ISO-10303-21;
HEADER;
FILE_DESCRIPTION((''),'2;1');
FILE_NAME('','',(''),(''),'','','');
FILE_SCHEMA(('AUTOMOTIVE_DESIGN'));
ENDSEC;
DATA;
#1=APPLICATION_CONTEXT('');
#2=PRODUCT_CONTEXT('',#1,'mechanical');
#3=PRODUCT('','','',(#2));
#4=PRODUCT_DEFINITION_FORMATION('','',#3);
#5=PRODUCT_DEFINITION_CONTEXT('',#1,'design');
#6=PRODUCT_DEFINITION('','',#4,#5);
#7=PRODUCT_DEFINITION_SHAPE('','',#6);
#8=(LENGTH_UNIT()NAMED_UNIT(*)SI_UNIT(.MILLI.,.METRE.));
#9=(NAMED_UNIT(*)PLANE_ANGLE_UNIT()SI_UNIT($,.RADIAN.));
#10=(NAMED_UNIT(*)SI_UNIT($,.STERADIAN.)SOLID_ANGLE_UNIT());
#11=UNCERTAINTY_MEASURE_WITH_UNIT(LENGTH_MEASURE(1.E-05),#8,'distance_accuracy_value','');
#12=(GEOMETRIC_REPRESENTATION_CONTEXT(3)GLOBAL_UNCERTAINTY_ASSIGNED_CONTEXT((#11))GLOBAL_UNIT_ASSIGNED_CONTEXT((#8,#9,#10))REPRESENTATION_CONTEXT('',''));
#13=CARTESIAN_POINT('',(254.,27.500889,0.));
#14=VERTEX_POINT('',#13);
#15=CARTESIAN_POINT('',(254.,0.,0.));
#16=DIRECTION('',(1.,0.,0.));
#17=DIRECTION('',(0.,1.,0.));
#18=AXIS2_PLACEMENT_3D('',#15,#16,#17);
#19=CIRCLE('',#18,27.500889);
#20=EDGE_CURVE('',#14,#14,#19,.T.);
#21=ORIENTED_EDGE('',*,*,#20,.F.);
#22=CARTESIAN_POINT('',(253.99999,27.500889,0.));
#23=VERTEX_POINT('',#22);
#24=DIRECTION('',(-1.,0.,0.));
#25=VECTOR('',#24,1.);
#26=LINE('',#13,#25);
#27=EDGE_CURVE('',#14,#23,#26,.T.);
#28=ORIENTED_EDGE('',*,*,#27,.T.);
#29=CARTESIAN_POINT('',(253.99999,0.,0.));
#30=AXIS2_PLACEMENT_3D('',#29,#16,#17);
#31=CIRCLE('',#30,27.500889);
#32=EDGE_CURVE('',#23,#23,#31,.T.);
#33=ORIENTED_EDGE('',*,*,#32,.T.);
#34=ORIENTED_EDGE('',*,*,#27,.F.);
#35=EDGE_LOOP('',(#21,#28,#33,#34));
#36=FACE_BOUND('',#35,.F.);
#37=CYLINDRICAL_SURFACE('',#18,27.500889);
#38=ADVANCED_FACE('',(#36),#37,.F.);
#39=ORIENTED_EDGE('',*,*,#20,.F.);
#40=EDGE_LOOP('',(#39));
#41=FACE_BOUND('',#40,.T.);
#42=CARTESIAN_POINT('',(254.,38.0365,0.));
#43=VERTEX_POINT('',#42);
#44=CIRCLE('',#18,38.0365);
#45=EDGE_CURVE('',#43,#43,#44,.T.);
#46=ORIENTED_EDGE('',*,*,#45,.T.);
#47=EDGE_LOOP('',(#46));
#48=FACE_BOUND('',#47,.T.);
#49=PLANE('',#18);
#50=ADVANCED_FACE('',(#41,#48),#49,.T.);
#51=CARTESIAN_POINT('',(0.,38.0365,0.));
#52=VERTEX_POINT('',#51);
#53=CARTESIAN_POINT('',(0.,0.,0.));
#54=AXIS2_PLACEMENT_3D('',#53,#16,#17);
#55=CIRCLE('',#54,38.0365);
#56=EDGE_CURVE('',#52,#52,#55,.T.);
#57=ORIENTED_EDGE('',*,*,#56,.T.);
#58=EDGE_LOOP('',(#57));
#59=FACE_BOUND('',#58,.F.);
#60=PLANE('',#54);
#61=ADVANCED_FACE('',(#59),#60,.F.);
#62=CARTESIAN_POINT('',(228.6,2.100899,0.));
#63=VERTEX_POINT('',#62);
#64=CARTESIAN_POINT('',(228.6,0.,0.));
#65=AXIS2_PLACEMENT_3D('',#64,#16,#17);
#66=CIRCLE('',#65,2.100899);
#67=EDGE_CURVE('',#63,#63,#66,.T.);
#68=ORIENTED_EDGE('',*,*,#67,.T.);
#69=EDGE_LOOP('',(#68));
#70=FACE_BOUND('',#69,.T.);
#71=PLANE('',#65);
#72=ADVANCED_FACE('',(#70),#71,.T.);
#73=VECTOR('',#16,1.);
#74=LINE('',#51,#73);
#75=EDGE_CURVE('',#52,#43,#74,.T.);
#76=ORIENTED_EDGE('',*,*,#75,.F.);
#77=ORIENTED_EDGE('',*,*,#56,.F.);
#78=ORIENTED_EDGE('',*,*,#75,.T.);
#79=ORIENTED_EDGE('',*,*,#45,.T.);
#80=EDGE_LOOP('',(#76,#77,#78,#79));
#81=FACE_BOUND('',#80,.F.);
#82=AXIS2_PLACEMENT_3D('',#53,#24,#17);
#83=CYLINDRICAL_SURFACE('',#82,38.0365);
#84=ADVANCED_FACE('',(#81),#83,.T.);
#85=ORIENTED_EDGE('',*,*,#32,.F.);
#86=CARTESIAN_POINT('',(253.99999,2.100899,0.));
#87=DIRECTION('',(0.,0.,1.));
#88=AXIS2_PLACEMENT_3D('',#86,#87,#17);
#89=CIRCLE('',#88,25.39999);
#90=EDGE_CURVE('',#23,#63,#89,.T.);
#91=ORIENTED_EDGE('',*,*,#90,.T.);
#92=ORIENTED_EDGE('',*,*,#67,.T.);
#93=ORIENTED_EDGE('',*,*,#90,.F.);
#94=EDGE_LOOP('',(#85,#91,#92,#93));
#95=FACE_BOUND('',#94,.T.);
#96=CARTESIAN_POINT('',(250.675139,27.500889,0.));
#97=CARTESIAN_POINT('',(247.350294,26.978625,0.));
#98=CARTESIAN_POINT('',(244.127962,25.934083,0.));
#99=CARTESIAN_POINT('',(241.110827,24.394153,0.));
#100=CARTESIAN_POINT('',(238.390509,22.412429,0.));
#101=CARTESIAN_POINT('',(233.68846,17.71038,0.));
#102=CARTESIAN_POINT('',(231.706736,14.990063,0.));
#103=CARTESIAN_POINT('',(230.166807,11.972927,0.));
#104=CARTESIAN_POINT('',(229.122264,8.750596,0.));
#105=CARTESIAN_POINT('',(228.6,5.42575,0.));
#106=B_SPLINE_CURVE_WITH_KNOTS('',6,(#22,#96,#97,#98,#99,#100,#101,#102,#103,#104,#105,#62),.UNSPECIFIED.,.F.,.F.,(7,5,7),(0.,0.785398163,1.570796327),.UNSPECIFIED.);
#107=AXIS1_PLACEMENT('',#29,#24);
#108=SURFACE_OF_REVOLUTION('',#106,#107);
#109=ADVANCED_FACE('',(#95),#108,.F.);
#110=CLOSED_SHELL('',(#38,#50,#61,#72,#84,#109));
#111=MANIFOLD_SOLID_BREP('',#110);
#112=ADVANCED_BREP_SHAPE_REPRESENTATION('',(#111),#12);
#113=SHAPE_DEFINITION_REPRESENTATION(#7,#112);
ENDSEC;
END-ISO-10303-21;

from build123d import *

# Parameters (mm, degrees)
F0_R     = 38.0365
F1_DEPTH = 254
F2_R     = 27.5008894084
F3_DEPTH = 25.4
F4_R     = 25.39999


# Not quite as in the source:
# - a fillet or chamfer is up to 0.001 mm smaller than in the source, because OpenCascade refuses the exact size


with BuildPart() as f1:
    # F0 (on Right) → F1 (new body)
    with BuildSketch(Plane.YZ):
        Circle(F0_R)
    extrude(amount=F1_DEPTH)

    # F2 (on face) → F3 (cut)
    with BuildSketch(Plane.YZ.offset(254)):
        Circle(F2_R)
    extrude(amount=-F3_DEPTH, mode=Mode.SUBTRACT)

    # F4 (radius 25.4 in the source; OpenCascade refuses exactly that, so slightly less here)
    f4_edges = [f1.edges().sort_by_distance(p)[0] for p in [
        (228.6, -27.500889, 0),
    ]]
    fillet(f4_edges, radius=F4_R)


solid = f1.part
